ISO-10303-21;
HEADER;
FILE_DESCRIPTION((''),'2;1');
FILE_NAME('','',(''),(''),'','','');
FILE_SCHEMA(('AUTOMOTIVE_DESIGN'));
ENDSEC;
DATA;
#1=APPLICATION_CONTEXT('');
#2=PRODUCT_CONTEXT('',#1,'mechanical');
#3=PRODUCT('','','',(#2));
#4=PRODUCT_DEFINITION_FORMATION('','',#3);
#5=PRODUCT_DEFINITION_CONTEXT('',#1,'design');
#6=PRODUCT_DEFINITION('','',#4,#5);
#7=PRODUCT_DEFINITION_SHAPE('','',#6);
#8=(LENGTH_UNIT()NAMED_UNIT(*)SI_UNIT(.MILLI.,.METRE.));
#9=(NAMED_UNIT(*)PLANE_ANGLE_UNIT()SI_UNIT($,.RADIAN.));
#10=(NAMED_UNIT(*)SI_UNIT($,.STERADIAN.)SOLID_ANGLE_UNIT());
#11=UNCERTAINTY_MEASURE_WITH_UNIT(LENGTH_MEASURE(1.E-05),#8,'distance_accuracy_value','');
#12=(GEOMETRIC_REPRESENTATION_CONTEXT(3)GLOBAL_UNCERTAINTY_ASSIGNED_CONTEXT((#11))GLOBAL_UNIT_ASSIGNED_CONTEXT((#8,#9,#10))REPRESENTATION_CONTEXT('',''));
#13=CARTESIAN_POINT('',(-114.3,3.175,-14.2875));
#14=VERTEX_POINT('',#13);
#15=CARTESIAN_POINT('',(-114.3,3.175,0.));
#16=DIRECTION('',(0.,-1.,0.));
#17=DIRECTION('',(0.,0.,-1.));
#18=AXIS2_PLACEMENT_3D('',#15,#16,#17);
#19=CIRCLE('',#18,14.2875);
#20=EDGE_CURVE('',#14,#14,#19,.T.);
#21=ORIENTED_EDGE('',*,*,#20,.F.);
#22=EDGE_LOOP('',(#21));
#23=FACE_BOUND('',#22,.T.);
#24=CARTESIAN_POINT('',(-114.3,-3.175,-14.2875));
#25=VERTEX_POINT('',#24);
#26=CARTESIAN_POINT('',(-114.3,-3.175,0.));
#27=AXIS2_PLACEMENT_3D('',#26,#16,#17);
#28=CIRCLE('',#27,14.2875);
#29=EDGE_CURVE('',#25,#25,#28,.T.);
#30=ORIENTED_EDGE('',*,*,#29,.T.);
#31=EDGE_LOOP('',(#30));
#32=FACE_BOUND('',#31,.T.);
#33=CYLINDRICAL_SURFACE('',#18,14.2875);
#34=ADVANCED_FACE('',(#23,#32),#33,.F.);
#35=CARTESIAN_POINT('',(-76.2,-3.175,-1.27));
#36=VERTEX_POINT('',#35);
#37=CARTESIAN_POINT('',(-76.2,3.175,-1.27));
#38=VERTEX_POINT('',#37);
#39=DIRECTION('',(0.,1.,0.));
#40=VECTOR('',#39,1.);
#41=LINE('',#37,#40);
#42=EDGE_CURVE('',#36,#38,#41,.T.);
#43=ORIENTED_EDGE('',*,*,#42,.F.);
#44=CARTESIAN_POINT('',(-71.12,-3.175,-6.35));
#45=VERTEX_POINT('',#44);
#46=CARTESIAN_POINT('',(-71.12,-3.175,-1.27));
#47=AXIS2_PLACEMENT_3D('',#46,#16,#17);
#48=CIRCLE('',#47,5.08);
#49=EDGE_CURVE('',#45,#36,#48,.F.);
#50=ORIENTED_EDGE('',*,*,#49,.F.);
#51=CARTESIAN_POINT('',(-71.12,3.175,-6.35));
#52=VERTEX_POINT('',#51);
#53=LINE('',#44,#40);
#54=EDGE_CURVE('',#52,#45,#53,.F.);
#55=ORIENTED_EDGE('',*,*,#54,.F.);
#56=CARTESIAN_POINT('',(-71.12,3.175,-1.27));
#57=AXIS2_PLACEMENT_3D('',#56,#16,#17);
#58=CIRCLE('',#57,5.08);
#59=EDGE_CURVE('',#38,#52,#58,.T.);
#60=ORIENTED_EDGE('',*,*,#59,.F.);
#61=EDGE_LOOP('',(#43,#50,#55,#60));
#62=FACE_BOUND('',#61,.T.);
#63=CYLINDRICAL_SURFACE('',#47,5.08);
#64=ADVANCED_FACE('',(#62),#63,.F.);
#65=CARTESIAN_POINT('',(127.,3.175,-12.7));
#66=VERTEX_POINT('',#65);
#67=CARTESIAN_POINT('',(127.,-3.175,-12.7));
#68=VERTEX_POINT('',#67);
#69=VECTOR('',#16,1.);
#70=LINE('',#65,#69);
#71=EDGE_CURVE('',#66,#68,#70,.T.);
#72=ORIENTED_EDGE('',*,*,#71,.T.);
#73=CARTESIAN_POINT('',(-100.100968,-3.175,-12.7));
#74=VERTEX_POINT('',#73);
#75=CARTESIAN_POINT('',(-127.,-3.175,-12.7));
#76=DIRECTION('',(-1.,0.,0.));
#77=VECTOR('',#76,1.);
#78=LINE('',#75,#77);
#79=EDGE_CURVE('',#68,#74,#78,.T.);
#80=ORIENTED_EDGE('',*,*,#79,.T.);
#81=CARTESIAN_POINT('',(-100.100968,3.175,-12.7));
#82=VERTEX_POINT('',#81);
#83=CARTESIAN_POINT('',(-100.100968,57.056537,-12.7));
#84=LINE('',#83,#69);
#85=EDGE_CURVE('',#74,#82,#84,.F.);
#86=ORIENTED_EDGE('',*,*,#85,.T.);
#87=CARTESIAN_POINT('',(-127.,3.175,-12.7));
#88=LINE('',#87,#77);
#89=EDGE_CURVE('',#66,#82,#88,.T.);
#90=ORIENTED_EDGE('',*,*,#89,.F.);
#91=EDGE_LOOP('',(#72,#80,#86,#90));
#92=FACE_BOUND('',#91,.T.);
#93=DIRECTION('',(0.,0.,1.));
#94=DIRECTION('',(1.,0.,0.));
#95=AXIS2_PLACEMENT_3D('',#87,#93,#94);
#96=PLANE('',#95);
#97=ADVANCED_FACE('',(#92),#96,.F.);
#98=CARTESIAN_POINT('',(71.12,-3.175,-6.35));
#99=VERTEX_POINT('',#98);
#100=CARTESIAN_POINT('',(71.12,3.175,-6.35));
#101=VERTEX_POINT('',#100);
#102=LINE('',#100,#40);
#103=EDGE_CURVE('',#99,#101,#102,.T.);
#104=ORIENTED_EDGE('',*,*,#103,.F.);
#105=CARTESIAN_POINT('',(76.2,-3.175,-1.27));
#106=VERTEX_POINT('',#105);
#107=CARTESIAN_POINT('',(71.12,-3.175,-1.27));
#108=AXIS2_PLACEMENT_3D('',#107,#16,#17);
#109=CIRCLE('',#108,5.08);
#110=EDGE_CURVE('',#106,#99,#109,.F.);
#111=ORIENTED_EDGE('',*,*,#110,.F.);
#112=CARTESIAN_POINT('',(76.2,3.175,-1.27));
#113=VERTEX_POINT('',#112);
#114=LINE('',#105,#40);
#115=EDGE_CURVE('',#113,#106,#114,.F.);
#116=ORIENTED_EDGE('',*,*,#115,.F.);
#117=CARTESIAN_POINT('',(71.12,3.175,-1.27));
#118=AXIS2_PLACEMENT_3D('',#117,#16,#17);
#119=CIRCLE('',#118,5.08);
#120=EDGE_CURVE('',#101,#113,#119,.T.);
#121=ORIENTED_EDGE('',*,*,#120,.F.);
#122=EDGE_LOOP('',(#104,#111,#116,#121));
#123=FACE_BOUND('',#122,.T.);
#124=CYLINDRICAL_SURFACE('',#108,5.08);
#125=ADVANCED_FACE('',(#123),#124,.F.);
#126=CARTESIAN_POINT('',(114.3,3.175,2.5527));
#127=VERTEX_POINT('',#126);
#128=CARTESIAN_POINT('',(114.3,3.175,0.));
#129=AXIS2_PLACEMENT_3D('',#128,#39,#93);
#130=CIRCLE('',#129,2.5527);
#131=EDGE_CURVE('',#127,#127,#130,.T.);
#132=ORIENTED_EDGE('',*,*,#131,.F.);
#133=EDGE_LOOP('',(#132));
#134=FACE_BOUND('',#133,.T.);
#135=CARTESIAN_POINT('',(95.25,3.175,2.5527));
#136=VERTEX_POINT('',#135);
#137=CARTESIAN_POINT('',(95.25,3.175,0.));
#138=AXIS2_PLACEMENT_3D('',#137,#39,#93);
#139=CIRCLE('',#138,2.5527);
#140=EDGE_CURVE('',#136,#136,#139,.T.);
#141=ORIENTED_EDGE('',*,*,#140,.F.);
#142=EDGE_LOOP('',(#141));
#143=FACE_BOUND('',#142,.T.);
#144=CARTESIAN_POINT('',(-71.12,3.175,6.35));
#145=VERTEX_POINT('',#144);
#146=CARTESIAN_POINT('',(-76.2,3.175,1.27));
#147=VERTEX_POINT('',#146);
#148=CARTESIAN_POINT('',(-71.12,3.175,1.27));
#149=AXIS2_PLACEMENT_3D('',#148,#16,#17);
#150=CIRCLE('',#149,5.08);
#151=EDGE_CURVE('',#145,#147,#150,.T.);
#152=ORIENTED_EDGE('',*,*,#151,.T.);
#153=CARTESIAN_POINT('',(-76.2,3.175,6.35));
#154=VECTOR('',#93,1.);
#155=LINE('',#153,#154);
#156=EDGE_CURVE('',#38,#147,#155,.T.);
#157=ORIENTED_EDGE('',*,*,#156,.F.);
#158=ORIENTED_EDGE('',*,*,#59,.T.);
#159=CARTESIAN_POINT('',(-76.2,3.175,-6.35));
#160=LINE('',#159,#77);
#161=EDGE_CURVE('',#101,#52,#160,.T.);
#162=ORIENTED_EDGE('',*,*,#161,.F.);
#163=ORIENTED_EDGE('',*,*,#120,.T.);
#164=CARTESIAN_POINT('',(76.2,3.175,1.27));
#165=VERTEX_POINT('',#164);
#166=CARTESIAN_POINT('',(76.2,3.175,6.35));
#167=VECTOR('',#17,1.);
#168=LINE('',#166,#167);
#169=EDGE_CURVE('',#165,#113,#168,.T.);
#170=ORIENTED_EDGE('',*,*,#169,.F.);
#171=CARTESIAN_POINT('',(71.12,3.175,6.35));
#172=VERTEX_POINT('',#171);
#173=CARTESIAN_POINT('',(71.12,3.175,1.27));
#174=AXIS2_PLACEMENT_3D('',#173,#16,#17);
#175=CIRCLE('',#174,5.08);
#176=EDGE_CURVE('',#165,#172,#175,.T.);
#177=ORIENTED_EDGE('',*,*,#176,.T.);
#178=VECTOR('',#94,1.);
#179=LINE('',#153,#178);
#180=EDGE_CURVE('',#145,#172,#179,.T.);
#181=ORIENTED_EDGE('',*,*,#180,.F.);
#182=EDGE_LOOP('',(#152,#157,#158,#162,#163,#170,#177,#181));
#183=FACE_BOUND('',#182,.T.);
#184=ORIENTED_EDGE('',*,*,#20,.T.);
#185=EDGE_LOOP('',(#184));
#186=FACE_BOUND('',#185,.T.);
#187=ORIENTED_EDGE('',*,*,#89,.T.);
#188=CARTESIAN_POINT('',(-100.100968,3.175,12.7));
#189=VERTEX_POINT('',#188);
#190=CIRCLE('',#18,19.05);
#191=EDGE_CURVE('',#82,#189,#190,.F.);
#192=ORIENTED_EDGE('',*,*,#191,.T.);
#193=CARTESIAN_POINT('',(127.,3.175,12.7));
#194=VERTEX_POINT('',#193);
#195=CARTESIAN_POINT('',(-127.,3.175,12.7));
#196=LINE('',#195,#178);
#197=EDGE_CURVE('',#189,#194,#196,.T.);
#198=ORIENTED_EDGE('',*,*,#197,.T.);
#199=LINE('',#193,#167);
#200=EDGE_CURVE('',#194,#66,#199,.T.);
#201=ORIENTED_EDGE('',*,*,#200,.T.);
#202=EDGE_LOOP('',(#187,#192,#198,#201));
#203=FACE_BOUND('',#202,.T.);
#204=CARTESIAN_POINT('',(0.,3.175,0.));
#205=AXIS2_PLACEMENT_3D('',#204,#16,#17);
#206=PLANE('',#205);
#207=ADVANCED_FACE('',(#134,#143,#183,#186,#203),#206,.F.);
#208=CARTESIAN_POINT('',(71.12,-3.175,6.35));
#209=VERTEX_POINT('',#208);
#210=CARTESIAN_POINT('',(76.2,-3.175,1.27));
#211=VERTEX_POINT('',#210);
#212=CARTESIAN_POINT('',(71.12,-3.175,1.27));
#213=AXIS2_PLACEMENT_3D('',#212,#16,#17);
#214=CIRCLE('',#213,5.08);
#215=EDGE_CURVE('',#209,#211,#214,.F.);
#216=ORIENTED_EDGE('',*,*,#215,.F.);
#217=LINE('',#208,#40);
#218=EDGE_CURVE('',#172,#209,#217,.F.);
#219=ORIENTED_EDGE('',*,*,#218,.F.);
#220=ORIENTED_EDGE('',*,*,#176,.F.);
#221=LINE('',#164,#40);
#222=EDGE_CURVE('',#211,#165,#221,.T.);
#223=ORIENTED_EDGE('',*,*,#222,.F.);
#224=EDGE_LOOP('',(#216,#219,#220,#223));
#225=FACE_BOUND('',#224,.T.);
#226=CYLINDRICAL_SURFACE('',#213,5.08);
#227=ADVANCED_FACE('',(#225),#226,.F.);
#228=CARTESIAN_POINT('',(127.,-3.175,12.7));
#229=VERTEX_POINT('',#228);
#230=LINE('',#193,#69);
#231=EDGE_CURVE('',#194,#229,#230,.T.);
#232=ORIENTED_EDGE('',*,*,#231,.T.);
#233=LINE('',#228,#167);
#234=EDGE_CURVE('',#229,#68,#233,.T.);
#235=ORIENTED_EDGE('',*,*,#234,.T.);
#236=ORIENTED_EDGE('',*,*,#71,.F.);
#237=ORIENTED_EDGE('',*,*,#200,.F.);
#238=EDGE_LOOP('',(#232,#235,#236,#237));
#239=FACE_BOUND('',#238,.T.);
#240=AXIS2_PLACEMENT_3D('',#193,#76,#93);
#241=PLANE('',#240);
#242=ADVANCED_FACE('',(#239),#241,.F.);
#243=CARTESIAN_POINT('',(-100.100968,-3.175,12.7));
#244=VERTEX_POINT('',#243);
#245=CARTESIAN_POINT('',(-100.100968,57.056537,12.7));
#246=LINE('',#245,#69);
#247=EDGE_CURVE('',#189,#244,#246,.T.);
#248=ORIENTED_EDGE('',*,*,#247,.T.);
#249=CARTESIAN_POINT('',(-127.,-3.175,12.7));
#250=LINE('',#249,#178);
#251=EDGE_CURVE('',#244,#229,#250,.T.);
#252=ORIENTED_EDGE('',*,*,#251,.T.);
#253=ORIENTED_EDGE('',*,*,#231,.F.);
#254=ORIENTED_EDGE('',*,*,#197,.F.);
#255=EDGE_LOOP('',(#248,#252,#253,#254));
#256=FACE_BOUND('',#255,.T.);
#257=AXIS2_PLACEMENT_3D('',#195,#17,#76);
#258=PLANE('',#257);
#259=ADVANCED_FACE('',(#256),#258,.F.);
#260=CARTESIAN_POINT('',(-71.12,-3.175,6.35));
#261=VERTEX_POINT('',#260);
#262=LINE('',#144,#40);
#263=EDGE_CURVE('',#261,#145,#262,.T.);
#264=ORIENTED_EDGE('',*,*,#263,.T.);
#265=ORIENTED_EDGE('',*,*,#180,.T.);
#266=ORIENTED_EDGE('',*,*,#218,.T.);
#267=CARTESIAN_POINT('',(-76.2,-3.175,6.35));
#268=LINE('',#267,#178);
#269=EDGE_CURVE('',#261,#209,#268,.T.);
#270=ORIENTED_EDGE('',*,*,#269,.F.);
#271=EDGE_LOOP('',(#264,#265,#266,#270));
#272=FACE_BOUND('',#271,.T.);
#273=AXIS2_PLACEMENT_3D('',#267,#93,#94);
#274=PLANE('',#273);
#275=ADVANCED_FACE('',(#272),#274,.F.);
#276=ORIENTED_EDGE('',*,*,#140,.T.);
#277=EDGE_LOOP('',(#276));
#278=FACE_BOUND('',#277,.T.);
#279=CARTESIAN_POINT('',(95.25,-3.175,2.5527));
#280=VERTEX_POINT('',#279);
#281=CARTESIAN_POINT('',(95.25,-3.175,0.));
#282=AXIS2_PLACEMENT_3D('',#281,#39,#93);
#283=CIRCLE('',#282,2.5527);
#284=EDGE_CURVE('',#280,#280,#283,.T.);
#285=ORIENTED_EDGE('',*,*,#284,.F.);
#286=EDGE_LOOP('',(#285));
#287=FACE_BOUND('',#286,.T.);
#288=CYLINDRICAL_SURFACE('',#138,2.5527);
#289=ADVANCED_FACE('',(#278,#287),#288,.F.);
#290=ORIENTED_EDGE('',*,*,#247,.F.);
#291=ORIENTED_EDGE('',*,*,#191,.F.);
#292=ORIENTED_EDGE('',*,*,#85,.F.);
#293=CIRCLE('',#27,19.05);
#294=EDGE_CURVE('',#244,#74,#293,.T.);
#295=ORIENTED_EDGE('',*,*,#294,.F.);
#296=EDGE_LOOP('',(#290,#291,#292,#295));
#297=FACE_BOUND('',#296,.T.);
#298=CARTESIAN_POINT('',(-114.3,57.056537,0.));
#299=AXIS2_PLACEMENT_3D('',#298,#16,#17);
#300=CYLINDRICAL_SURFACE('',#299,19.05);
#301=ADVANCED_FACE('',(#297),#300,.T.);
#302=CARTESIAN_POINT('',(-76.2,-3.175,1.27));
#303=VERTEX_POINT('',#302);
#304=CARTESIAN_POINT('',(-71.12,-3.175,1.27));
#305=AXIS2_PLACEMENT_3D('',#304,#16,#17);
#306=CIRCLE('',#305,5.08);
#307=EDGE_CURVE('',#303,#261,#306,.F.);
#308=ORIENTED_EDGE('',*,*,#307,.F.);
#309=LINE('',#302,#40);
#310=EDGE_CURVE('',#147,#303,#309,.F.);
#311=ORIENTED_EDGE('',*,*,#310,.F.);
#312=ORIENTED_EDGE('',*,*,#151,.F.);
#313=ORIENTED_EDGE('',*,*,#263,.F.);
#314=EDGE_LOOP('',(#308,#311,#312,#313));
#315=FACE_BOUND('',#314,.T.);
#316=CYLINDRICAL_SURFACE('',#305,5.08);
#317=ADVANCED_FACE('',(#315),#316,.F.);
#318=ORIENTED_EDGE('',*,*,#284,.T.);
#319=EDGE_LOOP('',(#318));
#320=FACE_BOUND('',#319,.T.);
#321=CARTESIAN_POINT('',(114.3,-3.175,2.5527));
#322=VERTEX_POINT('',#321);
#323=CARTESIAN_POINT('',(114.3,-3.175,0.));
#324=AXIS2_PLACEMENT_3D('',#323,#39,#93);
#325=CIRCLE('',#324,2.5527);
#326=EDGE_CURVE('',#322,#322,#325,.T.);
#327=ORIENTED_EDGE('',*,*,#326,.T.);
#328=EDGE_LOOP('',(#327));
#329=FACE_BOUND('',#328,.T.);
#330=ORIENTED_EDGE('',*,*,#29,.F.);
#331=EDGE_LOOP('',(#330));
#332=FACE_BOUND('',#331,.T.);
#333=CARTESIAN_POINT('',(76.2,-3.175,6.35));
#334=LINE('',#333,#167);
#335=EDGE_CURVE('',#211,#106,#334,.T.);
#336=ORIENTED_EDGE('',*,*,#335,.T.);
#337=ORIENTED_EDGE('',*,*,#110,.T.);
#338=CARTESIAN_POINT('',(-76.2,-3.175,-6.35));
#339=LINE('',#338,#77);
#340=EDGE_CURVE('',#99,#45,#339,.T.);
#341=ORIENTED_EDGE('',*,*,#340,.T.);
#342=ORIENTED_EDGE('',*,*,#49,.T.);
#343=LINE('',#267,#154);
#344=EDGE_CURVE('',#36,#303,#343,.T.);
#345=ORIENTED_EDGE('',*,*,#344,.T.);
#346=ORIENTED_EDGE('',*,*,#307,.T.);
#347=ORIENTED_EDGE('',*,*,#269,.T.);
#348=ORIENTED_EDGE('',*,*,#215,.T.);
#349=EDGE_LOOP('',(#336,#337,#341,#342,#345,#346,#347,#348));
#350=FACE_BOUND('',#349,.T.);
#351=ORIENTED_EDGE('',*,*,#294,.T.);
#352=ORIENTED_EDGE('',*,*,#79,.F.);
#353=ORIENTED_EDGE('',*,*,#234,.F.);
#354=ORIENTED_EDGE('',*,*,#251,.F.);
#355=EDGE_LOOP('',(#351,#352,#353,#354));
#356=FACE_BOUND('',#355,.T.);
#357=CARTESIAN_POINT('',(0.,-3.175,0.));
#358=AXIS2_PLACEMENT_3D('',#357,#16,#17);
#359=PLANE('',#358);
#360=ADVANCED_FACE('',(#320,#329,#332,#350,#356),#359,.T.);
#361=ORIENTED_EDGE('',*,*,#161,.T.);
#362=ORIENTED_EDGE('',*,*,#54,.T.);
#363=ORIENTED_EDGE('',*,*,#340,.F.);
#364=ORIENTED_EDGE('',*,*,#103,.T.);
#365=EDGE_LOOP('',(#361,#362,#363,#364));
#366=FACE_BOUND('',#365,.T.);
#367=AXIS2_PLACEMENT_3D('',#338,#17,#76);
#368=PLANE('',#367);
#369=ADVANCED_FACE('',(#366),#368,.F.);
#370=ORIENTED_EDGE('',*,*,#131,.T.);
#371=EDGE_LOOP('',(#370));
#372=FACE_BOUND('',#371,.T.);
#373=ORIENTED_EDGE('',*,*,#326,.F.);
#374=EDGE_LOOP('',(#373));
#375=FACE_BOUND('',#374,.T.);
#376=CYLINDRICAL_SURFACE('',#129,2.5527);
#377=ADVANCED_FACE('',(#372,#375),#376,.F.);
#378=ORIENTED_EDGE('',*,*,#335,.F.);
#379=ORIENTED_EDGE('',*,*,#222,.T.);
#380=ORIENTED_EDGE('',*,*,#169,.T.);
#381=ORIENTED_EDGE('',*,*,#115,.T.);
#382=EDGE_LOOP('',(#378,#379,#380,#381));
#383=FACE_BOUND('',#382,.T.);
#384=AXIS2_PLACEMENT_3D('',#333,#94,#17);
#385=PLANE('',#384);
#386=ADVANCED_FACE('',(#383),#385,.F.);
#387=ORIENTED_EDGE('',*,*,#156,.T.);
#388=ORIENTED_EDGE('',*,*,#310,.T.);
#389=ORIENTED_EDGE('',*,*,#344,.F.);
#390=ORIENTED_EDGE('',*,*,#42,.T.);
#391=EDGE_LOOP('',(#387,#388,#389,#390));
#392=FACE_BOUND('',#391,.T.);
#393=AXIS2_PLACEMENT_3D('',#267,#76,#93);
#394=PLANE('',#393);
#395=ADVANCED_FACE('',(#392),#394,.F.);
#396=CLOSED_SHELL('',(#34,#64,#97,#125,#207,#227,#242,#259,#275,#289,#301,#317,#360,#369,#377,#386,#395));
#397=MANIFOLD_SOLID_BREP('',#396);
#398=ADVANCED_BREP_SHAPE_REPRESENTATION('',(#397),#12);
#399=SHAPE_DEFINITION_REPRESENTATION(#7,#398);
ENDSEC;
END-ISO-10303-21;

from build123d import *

# Parameters (mm, degrees)
SKETCH1_W              = 254
SKETCH1_H              = 25.4
BOSS_EXTRUDE1_DEPTH    = 3.175
FILLET1_R              = 12.7
F_10_CLEARANCE_HOLE1_D = 5.1054
SKETCH9_W              = 152.4
SKETCH9_H              = 12.7
CUT_EXTRUDE2_DEPTH     = 128.791284914
FILLET2_R              = 5.08
SKETCH11_R             = 19.05
BOSS_EXTRUDE2_DEPTH    = 6.35
SKETCH10_R             = 14.2875
CUT_EXTRUDE3_DEPTH     = 135.853429693


with BuildPart() as part:
    # Sketch1 → Boss-Extrude1 (new, symmetric)
    with BuildSketch(Plane(origin=(0, 0, 0), x_dir=(1, 0, 0), z_dir=(0, 1, 0))):
        Rectangle(SKETCH1_W, SKETCH1_H)
    extrude(amount=BOSS_EXTRUDE1_DEPTH, both=True)

    # Fillet1
    fillet1_edges = [part.edges().sort_by_distance(p)[0] for p in [
        (-127, 0, -12.7),
        (-127, 0, 12.7),
    ]]
    fillet(fillet1_edges, radius=FILLET1_R - 0.0001)  # a hair under: the kernel refuses the full size

    # #10 Clearance Hole1 (through all)
    with Locations(Plane(origin=(0, 3.175, 0), x_dir=(1, 0, 0), z_dir=(0, 1, 0))):
        with Locations((114.3, 0), (95.25, 0)):
            Hole(F_10_CLEARANCE_HOLE1_D / 2)

    # Sketch9 → Cut-Extrude2 (cut, through all)
    with BuildSketch(Plane(origin=(0, 3.175, 0), x_dir=(1, 0, 0), z_dir=(0, 1, 0))):
        Rectangle(SKETCH9_W, SKETCH9_H)
    extrude(amount=-CUT_EXTRUDE2_DEPTH, mode=Mode.SUBTRACT)

    # Fillet2
    fillet2_edges = [part.edges().sort_by_distance(p)[0] for p in [
        (76.2, 0, -6.35),
        (76.2, 0, 6.35),
        (-76.2, 0, 6.35),
        (-76.2, 0, -6.35),
    ]]
    fillet(fillet2_edges, radius=FILLET2_R)

    # Sketch11 → Boss-Extrude2 (add)
    with BuildSketch(Plane.XZ.offset(3.175)):
        with Locations((-114.3, 0)):
            Circle(SKETCH11_R)
    extrude(amount=-BOSS_EXTRUDE2_DEPTH)

    # Sketch10 → Cut-Extrude3 (cut, through all)
    with BuildSketch(Plane.XZ.offset(3.175)):
        with Locations(Location((-114.3, 0, 0), (0, 0, 270))):
            Circle(SKETCH10_R)
    extrude(amount=-CUT_EXTRUDE3_DEPTH, mode=Mode.SUBTRACT)


solid = part.part
